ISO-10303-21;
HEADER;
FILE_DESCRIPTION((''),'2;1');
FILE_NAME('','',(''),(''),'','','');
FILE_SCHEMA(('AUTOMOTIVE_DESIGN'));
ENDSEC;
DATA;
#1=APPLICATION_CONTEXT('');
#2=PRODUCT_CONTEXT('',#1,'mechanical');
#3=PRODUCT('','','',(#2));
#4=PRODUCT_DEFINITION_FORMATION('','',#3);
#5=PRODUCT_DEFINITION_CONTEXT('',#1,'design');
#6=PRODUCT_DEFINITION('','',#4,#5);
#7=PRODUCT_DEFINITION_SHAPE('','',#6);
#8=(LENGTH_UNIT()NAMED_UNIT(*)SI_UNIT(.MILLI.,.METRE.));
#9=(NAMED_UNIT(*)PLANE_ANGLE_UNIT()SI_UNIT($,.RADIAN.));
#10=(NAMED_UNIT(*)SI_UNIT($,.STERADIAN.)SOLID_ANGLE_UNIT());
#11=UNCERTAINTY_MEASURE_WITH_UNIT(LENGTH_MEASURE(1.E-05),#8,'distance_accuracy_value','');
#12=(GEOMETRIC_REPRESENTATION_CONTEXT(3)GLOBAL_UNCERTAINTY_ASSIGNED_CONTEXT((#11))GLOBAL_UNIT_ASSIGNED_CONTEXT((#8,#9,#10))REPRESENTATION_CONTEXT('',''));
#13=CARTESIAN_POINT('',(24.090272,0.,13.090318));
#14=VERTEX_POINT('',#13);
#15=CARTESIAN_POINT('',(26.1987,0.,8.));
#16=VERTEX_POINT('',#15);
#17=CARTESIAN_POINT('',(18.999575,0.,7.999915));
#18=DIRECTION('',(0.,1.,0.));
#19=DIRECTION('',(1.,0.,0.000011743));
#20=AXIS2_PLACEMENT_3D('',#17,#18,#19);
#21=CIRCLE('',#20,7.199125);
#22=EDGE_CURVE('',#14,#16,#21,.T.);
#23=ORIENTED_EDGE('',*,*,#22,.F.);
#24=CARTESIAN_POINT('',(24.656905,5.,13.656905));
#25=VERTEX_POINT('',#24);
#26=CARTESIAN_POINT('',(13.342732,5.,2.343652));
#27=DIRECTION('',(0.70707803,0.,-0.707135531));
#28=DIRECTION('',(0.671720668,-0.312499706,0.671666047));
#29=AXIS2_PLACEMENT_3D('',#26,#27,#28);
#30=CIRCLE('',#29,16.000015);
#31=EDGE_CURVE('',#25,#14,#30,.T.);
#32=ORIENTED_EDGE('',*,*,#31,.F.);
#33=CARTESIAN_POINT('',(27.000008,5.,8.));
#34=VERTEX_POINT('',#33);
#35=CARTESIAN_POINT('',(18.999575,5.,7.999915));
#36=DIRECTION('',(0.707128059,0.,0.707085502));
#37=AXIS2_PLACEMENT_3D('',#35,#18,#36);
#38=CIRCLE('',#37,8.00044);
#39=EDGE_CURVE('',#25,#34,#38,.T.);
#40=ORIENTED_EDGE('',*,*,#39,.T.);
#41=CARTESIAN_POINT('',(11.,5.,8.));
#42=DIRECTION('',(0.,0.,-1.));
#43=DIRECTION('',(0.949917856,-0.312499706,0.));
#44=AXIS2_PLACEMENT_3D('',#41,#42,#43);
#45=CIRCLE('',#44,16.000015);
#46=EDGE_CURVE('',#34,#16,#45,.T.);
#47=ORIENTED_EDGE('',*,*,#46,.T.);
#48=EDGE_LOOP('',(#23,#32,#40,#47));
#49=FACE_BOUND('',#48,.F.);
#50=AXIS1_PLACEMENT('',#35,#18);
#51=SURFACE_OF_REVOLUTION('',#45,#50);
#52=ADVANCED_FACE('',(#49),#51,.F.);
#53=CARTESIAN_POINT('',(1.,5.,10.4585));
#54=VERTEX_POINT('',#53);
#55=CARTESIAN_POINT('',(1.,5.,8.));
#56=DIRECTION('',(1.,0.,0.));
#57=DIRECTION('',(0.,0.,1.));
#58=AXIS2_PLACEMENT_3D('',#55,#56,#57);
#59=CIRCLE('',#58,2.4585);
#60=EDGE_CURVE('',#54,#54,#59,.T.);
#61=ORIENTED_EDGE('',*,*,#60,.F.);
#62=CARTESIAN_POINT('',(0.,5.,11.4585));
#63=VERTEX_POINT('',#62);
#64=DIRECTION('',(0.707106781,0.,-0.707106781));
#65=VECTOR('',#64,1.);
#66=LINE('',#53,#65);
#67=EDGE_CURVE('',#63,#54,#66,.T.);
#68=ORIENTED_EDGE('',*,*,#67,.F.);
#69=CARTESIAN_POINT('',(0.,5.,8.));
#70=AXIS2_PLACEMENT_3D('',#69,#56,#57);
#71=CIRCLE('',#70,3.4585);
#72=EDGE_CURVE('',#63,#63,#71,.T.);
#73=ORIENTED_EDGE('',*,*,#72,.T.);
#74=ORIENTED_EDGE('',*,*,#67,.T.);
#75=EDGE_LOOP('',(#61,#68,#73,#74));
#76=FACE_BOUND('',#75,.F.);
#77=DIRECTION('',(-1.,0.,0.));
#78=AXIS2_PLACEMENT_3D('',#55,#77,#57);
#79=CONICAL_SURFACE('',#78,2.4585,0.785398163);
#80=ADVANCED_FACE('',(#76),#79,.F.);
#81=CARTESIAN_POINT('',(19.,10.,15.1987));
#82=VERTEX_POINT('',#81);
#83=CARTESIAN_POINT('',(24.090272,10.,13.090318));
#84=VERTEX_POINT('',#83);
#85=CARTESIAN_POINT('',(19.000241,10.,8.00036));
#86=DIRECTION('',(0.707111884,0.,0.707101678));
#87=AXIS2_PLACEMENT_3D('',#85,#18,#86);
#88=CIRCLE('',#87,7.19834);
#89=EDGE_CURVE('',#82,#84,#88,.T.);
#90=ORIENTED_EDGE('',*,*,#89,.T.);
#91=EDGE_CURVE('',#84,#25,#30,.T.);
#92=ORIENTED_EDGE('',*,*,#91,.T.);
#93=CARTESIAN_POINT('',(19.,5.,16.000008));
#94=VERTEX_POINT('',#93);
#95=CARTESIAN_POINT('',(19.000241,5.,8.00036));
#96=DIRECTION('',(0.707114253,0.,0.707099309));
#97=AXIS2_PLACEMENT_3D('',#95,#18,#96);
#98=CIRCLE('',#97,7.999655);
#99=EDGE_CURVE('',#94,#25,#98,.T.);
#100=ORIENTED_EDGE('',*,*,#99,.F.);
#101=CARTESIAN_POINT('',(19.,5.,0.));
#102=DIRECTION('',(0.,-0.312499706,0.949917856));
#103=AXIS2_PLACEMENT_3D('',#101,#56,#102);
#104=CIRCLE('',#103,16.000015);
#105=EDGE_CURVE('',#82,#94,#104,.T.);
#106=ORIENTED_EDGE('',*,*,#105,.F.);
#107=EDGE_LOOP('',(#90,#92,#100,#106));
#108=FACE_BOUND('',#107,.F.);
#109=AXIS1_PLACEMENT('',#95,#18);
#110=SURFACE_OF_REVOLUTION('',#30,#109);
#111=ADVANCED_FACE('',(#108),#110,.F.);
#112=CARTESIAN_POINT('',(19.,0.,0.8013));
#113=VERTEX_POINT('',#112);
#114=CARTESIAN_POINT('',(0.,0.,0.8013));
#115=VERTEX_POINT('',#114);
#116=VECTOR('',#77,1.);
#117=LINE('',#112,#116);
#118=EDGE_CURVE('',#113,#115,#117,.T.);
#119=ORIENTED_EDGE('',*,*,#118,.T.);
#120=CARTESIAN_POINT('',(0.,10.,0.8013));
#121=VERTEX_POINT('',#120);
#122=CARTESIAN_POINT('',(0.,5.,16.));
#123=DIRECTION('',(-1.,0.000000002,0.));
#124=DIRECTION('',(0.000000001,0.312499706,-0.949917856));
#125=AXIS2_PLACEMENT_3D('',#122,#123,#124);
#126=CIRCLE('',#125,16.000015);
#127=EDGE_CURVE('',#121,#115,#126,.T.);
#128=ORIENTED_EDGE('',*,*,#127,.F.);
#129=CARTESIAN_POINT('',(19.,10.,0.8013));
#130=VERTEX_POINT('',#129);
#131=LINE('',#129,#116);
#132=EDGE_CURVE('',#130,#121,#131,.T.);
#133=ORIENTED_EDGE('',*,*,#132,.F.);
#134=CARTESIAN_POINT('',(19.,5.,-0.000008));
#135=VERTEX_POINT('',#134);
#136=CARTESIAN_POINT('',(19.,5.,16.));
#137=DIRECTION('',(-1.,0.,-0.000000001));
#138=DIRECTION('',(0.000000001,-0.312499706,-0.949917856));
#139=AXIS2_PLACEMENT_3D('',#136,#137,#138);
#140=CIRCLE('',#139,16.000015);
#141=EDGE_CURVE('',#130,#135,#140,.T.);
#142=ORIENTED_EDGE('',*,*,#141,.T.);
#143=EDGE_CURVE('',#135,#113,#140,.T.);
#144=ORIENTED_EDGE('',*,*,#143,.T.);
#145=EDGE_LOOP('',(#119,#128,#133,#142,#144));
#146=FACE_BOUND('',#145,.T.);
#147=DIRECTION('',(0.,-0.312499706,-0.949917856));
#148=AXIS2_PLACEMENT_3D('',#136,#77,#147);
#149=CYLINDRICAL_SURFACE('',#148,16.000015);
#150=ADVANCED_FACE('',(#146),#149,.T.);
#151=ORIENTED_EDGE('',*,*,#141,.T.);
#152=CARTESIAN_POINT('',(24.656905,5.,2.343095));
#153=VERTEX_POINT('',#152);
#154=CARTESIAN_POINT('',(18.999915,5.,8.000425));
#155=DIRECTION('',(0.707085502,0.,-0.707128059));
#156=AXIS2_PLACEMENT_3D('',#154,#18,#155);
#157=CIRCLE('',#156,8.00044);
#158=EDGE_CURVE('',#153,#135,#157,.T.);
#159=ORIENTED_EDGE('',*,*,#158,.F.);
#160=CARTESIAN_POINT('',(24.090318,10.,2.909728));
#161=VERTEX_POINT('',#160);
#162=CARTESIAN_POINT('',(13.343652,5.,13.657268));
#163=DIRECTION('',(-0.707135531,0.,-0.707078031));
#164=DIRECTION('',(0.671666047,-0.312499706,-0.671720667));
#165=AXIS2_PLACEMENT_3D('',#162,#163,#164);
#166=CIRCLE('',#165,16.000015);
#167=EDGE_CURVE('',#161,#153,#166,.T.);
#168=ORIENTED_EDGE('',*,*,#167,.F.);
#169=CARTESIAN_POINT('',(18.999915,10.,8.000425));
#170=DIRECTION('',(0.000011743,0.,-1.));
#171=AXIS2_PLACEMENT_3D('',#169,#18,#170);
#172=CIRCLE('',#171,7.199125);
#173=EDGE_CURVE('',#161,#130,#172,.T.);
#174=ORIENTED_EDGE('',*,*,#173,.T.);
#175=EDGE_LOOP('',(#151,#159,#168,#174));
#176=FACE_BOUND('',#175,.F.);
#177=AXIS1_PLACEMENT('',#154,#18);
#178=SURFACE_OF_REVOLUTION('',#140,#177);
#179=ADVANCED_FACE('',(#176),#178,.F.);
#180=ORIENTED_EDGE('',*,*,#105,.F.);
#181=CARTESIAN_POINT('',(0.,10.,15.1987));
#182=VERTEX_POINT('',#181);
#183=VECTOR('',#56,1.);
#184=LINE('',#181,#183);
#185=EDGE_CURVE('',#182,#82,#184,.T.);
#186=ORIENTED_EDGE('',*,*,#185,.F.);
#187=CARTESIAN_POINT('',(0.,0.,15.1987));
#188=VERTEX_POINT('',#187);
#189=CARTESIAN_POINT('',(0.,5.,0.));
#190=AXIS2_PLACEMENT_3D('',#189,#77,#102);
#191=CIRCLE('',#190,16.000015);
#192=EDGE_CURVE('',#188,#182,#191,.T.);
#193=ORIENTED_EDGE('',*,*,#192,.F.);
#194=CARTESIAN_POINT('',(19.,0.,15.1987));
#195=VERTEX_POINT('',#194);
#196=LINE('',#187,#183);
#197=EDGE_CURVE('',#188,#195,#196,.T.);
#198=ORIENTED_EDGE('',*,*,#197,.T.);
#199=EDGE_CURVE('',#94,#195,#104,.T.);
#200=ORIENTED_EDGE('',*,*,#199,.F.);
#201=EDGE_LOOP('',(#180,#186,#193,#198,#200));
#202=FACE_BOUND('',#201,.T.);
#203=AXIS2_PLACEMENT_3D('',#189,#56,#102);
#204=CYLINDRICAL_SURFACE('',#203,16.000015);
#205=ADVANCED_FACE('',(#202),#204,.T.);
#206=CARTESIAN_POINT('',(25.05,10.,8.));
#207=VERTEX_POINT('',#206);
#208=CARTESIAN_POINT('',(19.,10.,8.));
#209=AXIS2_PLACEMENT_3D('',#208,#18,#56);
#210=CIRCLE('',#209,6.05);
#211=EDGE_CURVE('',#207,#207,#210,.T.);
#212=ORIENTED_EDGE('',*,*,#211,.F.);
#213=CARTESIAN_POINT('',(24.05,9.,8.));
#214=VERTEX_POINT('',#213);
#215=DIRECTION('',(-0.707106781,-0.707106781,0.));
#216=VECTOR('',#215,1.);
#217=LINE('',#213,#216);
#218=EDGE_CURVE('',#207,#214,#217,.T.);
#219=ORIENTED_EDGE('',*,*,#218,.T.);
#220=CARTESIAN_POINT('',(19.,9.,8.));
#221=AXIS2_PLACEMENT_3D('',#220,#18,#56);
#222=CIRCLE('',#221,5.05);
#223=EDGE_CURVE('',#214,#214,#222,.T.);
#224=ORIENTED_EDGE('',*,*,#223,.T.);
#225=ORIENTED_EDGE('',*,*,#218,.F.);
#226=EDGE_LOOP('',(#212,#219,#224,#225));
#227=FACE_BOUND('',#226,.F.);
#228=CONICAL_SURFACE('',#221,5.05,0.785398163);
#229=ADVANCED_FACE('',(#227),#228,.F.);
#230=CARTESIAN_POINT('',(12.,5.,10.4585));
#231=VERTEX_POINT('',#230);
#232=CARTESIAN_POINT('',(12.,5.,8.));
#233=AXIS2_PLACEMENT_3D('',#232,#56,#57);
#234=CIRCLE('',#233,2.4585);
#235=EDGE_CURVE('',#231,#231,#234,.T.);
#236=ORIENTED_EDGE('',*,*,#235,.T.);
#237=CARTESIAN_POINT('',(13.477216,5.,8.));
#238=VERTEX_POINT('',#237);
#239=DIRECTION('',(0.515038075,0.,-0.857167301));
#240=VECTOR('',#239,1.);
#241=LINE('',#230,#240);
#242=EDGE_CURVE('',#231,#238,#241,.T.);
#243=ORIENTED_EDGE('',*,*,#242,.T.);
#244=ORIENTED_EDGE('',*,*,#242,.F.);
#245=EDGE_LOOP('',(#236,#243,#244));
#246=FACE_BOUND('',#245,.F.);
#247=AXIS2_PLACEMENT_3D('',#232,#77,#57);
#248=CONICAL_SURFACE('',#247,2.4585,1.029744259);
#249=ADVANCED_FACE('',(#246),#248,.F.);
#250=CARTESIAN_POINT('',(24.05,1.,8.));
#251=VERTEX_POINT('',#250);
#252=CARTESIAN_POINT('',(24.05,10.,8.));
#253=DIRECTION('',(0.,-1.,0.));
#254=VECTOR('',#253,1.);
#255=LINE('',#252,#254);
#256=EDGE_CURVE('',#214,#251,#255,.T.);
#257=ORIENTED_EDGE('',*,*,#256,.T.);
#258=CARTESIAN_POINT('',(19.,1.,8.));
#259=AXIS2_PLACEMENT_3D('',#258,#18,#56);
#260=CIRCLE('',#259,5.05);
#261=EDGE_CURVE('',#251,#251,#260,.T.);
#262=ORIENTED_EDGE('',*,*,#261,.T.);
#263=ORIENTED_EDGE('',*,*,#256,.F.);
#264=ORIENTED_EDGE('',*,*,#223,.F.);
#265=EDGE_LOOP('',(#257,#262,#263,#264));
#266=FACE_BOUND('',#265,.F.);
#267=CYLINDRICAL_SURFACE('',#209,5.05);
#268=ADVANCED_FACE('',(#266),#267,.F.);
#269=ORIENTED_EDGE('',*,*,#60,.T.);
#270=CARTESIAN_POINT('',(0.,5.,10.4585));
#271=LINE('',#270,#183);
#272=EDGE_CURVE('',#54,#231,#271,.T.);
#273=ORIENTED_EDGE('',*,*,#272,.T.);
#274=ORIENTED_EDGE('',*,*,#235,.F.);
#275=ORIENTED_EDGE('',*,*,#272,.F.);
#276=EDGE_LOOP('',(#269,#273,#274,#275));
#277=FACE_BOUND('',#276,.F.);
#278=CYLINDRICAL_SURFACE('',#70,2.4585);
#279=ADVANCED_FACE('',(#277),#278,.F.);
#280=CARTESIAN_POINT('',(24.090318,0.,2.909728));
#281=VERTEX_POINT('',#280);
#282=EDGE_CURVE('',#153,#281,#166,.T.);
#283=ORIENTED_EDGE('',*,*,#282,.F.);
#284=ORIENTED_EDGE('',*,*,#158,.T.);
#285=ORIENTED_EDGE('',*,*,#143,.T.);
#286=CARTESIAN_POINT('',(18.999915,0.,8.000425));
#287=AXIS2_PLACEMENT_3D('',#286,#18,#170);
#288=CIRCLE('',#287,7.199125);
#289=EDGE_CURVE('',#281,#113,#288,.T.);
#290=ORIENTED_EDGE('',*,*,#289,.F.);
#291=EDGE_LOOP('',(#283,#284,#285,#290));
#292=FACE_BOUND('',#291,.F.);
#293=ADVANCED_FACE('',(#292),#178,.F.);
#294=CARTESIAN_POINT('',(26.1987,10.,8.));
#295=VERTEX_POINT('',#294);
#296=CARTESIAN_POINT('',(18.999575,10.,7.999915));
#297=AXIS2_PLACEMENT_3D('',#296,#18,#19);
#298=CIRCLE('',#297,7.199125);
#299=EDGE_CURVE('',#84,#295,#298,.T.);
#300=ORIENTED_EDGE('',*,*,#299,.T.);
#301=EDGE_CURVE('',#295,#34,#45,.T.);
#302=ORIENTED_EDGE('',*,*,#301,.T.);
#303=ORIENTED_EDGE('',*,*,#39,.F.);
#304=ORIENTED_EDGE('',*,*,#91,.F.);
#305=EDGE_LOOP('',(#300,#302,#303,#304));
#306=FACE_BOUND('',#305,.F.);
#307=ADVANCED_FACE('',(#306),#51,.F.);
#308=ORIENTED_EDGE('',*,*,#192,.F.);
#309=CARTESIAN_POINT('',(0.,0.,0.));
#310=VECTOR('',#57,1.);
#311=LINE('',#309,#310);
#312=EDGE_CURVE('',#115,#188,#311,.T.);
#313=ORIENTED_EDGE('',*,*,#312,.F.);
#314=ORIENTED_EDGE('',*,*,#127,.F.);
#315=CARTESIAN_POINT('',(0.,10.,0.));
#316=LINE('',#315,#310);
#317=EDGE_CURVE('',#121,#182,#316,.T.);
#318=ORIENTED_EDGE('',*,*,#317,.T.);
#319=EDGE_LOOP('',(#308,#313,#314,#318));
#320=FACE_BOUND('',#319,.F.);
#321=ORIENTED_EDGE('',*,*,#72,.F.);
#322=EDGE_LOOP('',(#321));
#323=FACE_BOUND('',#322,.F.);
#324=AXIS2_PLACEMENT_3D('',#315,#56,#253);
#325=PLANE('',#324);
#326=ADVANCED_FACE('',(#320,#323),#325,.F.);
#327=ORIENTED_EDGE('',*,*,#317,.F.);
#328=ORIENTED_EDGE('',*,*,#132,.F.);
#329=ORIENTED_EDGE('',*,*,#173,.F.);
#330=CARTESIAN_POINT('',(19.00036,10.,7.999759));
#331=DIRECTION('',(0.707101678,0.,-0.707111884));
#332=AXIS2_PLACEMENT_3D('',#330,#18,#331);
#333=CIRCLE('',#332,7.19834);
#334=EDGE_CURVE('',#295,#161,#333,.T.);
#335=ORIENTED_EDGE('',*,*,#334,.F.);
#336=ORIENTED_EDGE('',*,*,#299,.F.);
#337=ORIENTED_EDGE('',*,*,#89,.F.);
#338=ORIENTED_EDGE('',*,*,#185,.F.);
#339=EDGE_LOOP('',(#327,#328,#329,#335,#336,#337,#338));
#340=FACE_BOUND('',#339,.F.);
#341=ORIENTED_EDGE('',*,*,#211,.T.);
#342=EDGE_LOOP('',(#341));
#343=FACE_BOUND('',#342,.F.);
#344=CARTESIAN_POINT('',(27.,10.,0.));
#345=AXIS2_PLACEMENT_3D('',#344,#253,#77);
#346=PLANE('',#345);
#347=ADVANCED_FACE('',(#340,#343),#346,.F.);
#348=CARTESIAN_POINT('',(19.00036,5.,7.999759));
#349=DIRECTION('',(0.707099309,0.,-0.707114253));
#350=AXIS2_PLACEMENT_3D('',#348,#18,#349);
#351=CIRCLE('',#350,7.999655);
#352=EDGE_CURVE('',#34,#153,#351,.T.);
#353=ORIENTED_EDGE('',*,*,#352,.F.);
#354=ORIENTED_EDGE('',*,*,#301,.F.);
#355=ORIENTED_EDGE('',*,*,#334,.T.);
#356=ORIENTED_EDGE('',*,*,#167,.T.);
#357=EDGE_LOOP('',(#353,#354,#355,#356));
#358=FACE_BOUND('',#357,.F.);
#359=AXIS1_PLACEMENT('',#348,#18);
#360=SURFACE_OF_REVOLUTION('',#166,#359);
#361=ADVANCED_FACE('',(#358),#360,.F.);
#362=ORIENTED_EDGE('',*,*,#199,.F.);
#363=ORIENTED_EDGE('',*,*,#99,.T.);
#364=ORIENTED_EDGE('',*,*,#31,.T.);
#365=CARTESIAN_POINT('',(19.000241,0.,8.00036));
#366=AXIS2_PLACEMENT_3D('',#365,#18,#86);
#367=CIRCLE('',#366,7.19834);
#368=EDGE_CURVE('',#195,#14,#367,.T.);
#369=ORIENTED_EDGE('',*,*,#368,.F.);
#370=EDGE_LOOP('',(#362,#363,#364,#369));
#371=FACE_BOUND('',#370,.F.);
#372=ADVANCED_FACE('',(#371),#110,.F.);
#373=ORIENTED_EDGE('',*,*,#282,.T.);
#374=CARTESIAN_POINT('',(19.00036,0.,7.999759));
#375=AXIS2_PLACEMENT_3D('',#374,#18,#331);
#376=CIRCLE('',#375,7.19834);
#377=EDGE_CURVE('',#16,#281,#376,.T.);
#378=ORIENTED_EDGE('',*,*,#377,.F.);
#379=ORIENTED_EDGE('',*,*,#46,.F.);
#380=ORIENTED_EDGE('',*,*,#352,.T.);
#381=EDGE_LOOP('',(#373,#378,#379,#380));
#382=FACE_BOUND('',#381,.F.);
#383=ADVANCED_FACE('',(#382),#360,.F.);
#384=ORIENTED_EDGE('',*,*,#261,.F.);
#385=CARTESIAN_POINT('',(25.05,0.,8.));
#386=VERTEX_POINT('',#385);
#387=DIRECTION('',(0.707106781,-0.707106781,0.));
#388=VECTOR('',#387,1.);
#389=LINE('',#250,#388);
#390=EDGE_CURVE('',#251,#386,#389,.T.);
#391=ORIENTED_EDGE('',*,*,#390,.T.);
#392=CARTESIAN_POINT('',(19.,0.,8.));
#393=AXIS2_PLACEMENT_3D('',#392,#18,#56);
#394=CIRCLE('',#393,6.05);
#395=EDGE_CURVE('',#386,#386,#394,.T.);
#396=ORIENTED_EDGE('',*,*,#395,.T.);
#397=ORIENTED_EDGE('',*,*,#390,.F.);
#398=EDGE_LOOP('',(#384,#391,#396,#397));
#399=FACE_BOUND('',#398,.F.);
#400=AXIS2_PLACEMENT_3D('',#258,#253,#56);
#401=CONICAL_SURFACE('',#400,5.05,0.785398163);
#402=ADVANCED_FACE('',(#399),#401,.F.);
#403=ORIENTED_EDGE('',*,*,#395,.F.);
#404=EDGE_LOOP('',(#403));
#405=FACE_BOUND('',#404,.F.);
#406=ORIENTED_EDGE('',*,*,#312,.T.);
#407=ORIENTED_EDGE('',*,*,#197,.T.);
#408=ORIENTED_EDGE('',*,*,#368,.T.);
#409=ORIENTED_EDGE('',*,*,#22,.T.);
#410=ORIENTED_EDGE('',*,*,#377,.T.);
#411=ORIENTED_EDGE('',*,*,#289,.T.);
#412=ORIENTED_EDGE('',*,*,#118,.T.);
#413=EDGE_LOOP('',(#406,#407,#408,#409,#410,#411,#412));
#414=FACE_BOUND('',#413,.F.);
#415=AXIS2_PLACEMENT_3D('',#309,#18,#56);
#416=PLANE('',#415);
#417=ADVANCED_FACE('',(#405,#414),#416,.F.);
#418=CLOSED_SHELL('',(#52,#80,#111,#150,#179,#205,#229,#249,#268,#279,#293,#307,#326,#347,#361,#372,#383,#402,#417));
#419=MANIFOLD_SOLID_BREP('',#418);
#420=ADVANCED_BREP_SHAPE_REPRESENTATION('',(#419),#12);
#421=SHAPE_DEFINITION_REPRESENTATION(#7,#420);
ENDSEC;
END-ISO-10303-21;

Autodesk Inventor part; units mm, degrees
ref_plane "YZ Plane" through (0, 0, 0) normal (1, 0, 0) x (0, 1, 0)
ref_plane "XZ Plane" through (0, 0, 0) normal (0, 1, 0) x (-1, 0, 0)
ref_plane "XY Plane" through (0, 0, 0) normal (0, 0, 1) x (1, 0, 0)
sketch "Sketch1" plane through (0, 0, 0) normal (0, 0, 1) x (1, 0, 0)
  line L0 (0, 0) -> (27, 0)
  line L1 (27, 0) -> (27, 10)
  line L2 (27, 10) -> (0, 10)
  line L3 (0, 10) -> (0, 0)
  dimension "d0" = 27
  dimension "d1" = 10
extrude "Extrusion1" add sketch "Sketch1" along normal blind 16
fillet "Fillet1" radius 8 2 edges at (27, 5, 16) (27, 5, 0)
sketch "Sketch2" plane through (0, 10, 16) normal (0, 1, 0) x (1, 0, 0)
  circle A0 centre (19, 8) radius 5.05
  arc A1 (19, 0) -> (19, 16) centre (19, 8) ccw projected
  point P0 (0, 16)
  dimension "d5" = 10.1
extrude "Extrusion2" cut sketch "Sketch2" against normal through all
sketch "Sketch3" plane through (0, 0, 0) normal (-1, 0, 0) x (0, 0, 1)
  line L0 (0, 0) -> (16, 10) construction
  point P0 (8, 5)
  point P1 (8, 5)
hole "Hole1" at (0, 5, 8) direction (1, 0, 0) diameter 4.917 depth 12 tip angle 118
sketch "Sketch4" plane through (0, 0, 0) normal (-1, 0, 0) x (0, 0, 1)
  line L0 (0, 0) -> (16, 0) projected
  arc A0 (15.1987, 0) -> (15.1987, 10) centre (0, 5) ccw
  line L1 (0, 10) -> (16, 10) projected
  line L2 (16, 10) -> (16, 0) projected
  point P0 (16, 5)
  dimension "d15" = 16
sketch3d "3D Sketch1"
  line L0 (0, 10, 16) -> (19, 10, 16)
  arc A0 (19, 10, 0) -> (24.6569, 10, 2.3431) centre (19, 10, 8) ccw
  arc A1 (24.6569, 10, 2.3431) -> (27, 10, 8) centre (19, 10, 8) ccw
  arc A2 (27, 10, 8) -> (24.6569, 10, 13.6569) centre (19, 10, 8) ccw
  arc A3 (24.6569, 10, 13.6569) -> (19, 10, 16) centre (19, 10, 8) ccw
  line L1 (19, 10, 0) -> (0, 10, 0)
sweep "Sweep1" cut profiles "Sketch4" path "3D Sketch1"
chamfer "Chamfer1" distance 1 angle 45 3 edges at (13.95, 10, 8) (13.95, 0, 8) (0, 5, 5.5415)
properties part number "GMW-6-1 eye M6x1" material "Steel, Alloy"
